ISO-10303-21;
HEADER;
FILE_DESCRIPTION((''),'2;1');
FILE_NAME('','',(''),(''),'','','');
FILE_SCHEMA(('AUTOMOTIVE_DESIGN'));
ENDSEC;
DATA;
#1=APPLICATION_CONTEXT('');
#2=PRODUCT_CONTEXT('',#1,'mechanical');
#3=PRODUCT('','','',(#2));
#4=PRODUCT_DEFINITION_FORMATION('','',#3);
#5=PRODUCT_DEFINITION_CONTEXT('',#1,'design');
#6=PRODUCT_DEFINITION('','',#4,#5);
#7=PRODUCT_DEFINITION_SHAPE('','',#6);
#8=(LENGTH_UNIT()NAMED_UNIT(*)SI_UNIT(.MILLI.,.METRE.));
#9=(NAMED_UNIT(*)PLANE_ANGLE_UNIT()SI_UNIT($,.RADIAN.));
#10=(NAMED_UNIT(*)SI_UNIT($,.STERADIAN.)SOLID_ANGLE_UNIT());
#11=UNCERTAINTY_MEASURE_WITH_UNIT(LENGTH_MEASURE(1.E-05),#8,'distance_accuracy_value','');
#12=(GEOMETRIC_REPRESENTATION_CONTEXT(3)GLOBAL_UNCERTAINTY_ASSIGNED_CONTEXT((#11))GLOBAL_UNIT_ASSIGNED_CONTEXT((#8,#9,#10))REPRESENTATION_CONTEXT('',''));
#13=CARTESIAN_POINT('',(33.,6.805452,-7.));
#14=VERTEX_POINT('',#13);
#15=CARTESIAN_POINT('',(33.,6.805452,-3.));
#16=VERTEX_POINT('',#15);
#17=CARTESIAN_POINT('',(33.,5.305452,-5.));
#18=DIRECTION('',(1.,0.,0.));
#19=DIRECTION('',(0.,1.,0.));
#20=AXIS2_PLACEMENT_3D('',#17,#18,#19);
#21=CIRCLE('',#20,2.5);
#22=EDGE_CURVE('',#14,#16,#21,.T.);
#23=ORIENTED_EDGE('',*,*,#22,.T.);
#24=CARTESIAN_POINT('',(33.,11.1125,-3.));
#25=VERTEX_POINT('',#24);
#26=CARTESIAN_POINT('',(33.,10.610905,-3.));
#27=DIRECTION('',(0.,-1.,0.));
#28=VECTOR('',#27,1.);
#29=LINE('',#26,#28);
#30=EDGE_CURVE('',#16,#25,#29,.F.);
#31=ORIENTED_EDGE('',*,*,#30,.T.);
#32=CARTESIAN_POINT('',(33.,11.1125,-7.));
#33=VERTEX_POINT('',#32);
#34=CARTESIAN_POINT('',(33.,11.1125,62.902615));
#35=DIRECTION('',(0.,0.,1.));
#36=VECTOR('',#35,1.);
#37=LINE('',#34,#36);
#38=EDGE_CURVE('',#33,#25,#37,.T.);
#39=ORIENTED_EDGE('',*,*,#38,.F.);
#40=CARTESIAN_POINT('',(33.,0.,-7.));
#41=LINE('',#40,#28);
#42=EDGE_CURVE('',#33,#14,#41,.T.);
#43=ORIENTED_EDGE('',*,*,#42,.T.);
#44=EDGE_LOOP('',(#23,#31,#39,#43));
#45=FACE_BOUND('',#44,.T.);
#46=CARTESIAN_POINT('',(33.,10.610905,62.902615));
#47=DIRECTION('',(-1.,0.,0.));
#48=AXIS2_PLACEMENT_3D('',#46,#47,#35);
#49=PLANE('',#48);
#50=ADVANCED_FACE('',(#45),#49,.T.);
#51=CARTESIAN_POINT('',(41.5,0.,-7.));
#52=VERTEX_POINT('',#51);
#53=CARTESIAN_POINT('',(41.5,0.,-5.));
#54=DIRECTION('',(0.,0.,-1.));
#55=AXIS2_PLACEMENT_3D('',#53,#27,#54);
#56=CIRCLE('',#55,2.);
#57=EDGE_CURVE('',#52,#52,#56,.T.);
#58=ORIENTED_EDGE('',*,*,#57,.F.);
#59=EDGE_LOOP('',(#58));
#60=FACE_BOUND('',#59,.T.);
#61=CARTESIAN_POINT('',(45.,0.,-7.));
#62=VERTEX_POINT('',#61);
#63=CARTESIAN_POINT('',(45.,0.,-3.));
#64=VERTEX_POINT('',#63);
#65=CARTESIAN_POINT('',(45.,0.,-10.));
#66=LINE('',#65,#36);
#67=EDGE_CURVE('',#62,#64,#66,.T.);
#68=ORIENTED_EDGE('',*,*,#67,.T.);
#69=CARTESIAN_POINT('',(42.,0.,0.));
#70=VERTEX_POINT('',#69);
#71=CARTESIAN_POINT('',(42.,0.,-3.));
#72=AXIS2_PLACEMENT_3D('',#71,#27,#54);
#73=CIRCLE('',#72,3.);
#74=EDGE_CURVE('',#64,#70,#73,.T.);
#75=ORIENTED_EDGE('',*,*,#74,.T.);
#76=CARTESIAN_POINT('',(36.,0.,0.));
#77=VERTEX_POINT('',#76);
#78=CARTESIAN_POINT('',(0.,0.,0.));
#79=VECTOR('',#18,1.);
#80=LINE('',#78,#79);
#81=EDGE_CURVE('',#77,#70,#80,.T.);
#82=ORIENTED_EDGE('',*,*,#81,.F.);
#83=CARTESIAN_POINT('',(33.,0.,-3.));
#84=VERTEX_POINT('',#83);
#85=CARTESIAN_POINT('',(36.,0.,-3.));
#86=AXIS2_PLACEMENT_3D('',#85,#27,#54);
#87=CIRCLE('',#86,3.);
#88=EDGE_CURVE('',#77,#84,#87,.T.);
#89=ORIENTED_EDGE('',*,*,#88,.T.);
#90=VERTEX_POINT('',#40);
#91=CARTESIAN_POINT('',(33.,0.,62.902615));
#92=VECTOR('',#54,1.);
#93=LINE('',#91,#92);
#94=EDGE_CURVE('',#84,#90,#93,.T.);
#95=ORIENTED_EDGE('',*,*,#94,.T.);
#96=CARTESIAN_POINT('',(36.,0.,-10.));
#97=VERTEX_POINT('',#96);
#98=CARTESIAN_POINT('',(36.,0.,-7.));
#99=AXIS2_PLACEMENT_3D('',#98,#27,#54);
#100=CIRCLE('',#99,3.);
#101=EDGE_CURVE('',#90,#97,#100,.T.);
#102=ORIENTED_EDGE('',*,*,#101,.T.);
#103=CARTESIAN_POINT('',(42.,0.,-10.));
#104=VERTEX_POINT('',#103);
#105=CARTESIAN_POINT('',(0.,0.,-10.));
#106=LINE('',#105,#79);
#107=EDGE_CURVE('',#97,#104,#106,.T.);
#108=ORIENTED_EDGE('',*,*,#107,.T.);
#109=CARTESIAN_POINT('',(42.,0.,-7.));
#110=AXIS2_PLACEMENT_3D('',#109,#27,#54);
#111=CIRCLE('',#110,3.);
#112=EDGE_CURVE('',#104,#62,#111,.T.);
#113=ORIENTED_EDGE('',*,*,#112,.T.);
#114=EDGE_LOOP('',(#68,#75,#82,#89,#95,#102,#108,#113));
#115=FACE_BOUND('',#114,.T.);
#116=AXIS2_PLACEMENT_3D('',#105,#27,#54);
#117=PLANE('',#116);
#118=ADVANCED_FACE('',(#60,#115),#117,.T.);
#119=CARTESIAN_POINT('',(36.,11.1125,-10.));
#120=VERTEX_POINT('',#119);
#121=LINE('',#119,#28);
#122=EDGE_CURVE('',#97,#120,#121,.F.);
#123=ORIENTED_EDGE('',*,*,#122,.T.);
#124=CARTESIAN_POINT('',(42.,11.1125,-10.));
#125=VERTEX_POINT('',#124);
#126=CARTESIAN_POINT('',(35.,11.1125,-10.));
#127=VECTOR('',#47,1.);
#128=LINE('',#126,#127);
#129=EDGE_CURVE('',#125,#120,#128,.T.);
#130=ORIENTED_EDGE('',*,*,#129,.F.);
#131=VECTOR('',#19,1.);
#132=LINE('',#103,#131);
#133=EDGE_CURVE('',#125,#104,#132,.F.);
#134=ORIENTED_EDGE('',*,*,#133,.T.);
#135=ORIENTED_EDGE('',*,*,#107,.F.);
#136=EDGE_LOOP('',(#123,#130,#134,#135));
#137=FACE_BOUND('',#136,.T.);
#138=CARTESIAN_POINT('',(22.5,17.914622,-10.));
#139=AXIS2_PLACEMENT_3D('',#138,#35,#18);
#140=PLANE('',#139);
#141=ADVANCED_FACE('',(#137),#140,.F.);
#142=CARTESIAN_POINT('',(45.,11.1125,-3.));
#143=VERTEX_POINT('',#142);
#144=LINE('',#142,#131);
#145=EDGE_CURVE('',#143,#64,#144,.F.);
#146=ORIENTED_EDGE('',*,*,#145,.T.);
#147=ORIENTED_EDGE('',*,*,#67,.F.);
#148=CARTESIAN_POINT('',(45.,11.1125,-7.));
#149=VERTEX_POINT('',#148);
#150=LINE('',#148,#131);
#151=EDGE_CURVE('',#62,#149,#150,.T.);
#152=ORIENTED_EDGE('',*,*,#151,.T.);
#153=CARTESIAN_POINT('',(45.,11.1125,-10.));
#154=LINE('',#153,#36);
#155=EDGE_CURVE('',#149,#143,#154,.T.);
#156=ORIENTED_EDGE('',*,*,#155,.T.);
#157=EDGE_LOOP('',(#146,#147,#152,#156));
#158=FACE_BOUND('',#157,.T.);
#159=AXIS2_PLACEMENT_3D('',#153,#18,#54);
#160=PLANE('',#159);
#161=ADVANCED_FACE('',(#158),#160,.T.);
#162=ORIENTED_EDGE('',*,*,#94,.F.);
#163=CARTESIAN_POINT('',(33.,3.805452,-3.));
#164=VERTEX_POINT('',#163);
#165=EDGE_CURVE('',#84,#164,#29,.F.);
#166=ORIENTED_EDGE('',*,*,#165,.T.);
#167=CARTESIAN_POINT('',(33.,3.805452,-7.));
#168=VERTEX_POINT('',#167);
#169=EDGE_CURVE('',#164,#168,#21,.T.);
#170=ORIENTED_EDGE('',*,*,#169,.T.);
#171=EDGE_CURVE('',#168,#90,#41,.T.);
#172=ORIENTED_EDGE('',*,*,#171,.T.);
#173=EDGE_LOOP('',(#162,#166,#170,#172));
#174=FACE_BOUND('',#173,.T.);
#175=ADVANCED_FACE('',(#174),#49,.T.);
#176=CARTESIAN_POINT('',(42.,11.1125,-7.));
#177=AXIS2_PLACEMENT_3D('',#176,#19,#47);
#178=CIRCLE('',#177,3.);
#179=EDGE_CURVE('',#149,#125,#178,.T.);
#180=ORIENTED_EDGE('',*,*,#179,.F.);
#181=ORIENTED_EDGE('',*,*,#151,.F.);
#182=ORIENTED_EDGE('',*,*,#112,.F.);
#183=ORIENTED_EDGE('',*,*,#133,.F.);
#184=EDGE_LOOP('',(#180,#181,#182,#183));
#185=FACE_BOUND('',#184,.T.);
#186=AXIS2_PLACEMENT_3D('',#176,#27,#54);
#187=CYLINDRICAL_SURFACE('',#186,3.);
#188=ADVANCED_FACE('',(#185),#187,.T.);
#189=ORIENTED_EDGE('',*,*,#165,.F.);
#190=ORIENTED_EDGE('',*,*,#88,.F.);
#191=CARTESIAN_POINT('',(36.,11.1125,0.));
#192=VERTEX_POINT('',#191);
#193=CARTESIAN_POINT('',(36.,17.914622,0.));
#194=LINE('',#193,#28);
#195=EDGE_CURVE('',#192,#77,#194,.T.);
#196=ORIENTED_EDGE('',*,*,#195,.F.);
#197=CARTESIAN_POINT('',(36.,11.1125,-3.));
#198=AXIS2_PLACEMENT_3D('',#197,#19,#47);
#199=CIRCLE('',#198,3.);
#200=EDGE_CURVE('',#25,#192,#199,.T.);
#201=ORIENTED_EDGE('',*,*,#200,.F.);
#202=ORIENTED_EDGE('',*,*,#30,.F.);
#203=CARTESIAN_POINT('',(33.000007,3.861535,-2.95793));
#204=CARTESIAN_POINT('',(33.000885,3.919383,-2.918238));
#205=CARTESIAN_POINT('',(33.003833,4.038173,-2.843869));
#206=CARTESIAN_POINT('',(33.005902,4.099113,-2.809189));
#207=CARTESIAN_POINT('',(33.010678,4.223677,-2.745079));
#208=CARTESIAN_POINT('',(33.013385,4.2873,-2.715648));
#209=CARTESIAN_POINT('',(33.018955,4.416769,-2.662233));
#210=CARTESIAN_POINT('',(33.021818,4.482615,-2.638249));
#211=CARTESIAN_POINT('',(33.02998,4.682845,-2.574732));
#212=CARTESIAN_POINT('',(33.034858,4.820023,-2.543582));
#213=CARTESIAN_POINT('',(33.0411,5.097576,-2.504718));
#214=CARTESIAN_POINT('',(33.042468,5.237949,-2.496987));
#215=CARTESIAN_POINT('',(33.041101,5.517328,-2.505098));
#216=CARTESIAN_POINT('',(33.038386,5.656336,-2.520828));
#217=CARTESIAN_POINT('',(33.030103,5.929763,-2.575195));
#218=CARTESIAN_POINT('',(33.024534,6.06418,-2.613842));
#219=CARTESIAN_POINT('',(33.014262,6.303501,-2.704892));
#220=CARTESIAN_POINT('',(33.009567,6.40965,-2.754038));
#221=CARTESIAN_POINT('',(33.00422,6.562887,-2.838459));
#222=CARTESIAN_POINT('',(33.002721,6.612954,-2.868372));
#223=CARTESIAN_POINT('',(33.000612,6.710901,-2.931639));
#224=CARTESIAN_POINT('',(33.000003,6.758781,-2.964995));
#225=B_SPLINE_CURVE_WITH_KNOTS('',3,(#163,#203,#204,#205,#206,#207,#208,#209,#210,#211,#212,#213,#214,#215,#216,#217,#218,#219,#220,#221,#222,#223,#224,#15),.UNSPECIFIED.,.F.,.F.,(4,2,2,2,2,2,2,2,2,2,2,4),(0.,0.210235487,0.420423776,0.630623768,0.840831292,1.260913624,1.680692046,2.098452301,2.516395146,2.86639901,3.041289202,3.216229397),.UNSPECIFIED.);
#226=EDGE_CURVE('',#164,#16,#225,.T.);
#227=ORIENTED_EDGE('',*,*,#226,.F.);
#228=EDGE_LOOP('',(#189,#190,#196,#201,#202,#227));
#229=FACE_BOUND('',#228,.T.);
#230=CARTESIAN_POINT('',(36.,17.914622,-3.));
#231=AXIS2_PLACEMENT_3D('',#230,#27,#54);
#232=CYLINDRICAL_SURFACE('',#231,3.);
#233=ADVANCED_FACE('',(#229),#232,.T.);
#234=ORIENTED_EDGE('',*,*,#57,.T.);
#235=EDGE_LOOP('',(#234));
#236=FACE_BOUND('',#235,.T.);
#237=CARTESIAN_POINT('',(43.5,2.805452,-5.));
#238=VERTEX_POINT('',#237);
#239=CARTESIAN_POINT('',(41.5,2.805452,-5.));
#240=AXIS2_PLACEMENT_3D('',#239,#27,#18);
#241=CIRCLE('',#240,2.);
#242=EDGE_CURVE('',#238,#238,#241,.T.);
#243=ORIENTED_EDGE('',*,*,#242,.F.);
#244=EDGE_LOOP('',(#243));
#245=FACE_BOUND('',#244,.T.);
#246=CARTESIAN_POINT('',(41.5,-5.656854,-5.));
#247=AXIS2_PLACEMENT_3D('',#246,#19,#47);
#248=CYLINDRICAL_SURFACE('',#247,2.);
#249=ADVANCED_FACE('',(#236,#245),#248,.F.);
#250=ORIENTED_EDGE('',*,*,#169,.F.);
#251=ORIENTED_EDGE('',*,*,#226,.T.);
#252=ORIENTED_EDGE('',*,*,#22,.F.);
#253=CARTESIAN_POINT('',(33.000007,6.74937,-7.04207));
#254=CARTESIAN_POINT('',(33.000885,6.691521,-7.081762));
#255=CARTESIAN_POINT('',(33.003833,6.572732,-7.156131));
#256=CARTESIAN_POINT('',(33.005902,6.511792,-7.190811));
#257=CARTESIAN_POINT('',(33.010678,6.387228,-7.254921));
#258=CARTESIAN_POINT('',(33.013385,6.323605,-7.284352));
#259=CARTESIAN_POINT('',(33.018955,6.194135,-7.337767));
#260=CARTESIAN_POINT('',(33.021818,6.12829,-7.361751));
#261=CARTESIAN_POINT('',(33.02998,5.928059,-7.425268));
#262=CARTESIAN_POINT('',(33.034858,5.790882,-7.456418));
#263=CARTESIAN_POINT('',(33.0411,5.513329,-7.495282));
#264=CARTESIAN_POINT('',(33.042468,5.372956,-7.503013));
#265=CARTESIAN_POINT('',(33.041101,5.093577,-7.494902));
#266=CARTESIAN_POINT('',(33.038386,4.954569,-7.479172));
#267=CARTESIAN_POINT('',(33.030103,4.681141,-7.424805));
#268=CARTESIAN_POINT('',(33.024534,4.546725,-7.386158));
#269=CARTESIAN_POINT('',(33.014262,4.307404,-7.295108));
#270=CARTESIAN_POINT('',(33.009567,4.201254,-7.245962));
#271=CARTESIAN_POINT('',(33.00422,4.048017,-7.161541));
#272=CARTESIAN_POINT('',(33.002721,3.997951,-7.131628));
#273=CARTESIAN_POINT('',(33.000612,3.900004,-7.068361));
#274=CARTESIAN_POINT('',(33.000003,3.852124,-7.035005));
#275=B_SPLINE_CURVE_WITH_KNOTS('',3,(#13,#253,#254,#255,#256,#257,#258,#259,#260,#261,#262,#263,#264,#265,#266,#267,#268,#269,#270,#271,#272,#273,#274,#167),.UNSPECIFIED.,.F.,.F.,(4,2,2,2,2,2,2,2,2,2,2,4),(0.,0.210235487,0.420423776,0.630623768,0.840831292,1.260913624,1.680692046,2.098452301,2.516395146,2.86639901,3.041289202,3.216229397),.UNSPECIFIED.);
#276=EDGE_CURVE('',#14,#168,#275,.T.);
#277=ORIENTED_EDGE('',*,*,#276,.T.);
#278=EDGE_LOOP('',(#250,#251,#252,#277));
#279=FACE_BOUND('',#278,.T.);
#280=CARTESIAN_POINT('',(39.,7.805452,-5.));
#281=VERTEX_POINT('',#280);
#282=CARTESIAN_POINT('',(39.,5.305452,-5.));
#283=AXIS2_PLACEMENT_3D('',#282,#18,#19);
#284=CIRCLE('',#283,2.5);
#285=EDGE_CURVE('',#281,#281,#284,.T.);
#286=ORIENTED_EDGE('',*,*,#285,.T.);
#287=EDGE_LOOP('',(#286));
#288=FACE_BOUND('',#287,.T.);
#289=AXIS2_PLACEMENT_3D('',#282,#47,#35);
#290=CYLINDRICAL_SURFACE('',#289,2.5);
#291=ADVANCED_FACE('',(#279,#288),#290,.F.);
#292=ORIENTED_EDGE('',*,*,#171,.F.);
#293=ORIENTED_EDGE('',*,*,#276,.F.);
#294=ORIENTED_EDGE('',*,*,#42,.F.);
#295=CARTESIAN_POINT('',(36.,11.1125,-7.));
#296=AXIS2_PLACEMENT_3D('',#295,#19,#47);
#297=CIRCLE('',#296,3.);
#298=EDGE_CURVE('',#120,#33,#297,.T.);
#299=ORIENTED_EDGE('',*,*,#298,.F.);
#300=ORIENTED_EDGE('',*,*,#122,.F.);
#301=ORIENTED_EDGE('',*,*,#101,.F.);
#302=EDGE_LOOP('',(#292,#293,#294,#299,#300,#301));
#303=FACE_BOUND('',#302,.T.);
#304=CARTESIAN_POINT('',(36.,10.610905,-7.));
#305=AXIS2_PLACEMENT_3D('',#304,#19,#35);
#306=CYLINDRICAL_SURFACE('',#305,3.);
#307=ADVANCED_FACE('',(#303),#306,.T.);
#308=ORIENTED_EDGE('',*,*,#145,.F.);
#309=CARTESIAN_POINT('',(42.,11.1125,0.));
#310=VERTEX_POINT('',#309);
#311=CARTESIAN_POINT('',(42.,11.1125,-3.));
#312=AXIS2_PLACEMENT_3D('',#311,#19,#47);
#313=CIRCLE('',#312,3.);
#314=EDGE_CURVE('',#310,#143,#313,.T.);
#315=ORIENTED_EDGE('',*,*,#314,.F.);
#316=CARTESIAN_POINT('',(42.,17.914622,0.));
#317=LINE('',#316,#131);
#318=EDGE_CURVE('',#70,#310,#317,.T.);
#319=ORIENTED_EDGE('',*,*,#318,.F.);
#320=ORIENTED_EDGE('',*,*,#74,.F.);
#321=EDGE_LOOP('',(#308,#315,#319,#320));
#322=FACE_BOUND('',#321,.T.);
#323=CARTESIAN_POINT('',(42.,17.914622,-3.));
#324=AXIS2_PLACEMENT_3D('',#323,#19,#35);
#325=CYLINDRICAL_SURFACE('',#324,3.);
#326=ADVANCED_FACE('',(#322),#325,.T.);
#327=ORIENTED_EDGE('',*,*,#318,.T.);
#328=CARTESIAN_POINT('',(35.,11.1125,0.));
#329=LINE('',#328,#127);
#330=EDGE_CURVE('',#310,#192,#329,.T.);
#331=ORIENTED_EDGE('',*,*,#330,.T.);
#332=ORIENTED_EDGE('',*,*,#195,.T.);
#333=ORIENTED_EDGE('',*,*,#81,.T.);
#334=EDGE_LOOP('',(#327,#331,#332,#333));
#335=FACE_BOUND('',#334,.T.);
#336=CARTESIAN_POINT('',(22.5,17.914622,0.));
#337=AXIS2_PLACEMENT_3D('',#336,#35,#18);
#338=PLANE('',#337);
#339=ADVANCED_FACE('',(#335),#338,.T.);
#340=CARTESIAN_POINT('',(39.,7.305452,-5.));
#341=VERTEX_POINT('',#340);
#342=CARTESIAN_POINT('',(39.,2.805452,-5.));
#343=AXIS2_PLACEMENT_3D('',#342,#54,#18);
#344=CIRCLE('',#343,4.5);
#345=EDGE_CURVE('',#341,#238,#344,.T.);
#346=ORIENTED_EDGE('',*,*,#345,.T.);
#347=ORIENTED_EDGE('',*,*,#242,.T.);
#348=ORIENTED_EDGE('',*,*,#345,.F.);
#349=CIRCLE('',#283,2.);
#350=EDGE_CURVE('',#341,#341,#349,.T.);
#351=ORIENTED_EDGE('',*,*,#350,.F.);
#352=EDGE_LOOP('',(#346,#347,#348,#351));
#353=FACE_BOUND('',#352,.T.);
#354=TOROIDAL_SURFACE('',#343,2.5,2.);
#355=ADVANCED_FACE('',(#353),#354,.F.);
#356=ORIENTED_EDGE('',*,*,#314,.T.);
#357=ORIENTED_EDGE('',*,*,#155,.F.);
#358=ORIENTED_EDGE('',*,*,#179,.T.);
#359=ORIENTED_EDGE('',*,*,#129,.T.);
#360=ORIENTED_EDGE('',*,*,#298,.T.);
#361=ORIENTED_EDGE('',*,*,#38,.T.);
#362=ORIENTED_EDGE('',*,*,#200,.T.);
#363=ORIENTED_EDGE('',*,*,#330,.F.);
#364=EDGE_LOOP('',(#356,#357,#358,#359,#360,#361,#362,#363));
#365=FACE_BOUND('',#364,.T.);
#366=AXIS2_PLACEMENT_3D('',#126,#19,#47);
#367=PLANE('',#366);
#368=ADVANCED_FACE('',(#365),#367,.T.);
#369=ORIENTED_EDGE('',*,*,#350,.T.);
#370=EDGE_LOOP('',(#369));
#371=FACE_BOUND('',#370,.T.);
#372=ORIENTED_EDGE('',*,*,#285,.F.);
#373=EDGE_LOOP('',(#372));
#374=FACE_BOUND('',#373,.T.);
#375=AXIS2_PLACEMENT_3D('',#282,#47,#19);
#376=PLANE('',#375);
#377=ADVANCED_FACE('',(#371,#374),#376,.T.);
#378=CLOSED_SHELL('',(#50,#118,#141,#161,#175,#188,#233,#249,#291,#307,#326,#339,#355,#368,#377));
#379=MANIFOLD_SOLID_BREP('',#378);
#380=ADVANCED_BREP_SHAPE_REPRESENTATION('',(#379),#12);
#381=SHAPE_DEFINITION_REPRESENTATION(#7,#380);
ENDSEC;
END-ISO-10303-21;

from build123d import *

# Parameters (mm, degrees)
BOSS_EXTRUDE1_DEPTH     = 10
CUT_EXTRUDE2_DEPTH      = 50.456381745
CUT_EXTRUDE2_DEPTH_BACK = 50.456381745
SKETCH3_R               = 2.5
CUT_EXTRUDE3_DEPTH      = 6
SKETCH4_R               = 2
CUT_REVOLVE1_ANGLE      = 90
SKETCH5_R               = 2
CUT_EXTRUDE4_DEPTH      = 2.805452299
FILLET1_R               = 5
SKETCH6_W               = 10
SKETCH6_H               = 29.685485307
CUT_EXTRUDE5_DEPTH      = 33
SKETCH7_W               = 19.76767366
SKETCH7_H               = 10
CUT_EXTRUDE6_DEPTH      = 48.418220859
FILLET2_R               = 3


with BuildPart() as part:
    # Sketch1 → Boss-Extrude1 (new body)
    with BuildSketch(Plane.XY):
        with BuildLine():
            Line((0, 0), (45, 0))
            Line((45, 0), (45, 11.1125))
            Line((45, 11.1125), (35, 11.1125))
            add(Edge.make_bspline(
                [(10, 11.1125), (14.576625097, 20.181995974), (30.423374903, 20.181995974), (35, 11.1125)],
                knots=[0, 0, 0, 0, 1, 1, 1, 1], degree=3))
            Line((10, 11.1125), (0, 11.1125))
            Line((0, 11.1125), (0, 0))
        make_face()
    extrude(amount=-BOSS_EXTRUDE1_DEPTH)

    # Sketch2 → Cut-Extrude2 (cut, two sides: drawn at the far end of the back side and taken through both)
    with BuildSketch(Plane.XY.offset(-CUT_EXTRUDE2_DEPTH_BACK)):
        with BuildLine():
            Line((33, 0), (33, 10.610904597))
            add(Edge.make_bspline(
                [(33, 10.610904597), (32.518518069, 11.455367364), (31.27134268, 12.982349636), (27.931157473, 15.20113612), (22.5, 16.390279221), (17.068842527, 15.20113612), (13.72865732, 12.982349636), (12.481481931, 11.455367364), (12, 10.610904597)],
                knots=[0.018308459, 0.018308459, 0.018308459, 0.018308459, 0.138731344, 0.25915423, 0.5, 0.74084577, 0.861268656, 0.981691541, 0.981691541, 0.981691541, 0.981691541], degree=3))
            Line((12, 10.610904597), (12, 0))
            Line((12, 0), (33, 0))
        make_face()
    extrude(amount=CUT_EXTRUDE2_DEPTH + CUT_EXTRUDE2_DEPTH_BACK, mode=Mode.SUBTRACT)

    # Sketch3 → Cut-Extrude3 (cut)
    with BuildSketch(Plane(origin=(12, 0, 0), x_dir=(0, 0, -1), z_dir=(1, 0, 0))):
        with Locations(Location((5, 5.305452299, 0), (0, 0, 90))):
            Circle(SKETCH3_R)
    cut_extrude3 = extrude(amount=-CUT_EXTRUDE3_DEPTH, mode=Mode.SUBTRACT)

    # Sketch4 → Cut-Revolve1 (revolve, cut)
    with BuildSketch(Plane(origin=(6, 0, 0), x_dir=(0, 0, -1), z_dir=(1, 0, 0))):
        with Locations((5, 5.305452299)):
            Circle(SKETCH4_R)
    cut_revolve1 = revolve(axis=Axis((6, 2.805452299, -5), (0, 0, 1)), revolution_arc=CUT_REVOLVE1_ANGLE, mode=Mode.SUBTRACT)

    # Sketch5 → Cut-Extrude4 (cut)
    with BuildSketch(Plane(origin=(0, 2.805452299, 0), x_dir=(1, 0, 0), z_dir=(0, 1, 0))):
        with Locations(Location((3.5, 5, 0), (0, 0, 180))):
            Circle(SKETCH5_R)
    cut_extrude4 = extrude(amount=-CUT_EXTRUDE4_DEPTH, mode=Mode.SUBTRACT)

    # Mirror1: Cut-Extrude3, Cut-Revolve1, Cut-Extrude4 across plane
    add(cut_extrude3.mirror(Plane(origin=(22.5, 0, 0), x_dir=(0, 0, 1), z_dir=(1, 0, 0))), mode=Mode.SUBTRACT)
    add(cut_revolve1.mirror(Plane(origin=(22.5, 0, 0), x_dir=(0, 0, 1), z_dir=(1, 0, 0))), mode=Mode.SUBTRACT)
    add(cut_extrude4.mirror(Plane(origin=(22.5, 0, 0), x_dir=(0, 0, 1), z_dir=(1, 0, 0))), mode=Mode.SUBTRACT)

    # Fillet1
    fillet1_edges = [part.edges().sort_by_distance(p)[0] for p in [
        (10, 11.1125, -5),
        (35, 11.1125, -5),
        (33, 10.610904597, -5),
        (12, 10.610904597, -5),
    ]]
    fillet(fillet1_edges, radius=FILLET1_R)

    # Sketch6 → Cut-Extrude5 (cut)
    with BuildSketch(Plane.ZY):
        with Locations((-5, 14.842742654)):
            Rectangle(SKETCH6_W, SKETCH6_H)
    extrude(amount=-CUT_EXTRUDE5_DEPTH, mode=Mode.SUBTRACT)

    # Sketch7 → Cut-Extrude6 (cut, through all)
    with BuildSketch(Plane(origin=(0, 11.1125, 0), x_dir=(1, 0, 0), z_dir=(0, 1, 0))):
        with Locations((35.11616317, 5)):
            Rectangle(SKETCH7_W, SKETCH7_H)
    extrude(amount=CUT_EXTRUDE6_DEPTH, mode=Mode.SUBTRACT)

    # Fillet2
    # the kernel refuses this fillet: 3 mm, written as the material it takes off along each edge
    with BuildSketch(Plane(origin=(45, -7.5, -10), x_dir=(0, 0, 1), z_dir=(0, 1, 0)), Plane(origin=(33, 18.6125, 0), x_dir=(1, 0, 0), z_dir=(0, -1, 0)), Plane(origin=(45, -7.5, 0), x_dir=(-1, 0, 0), z_dir=(0, 1, 0))) as fillet2_piece_1:
        with BuildLine():
            CenterArc((FILLET2_R, -FILLET2_R), FILLET2_R, 90, 90)
            Line((0, -FILLET2_R), (0, 0))
            Line((0, 0), (FILLET2_R, 0))
        make_face()
    extrude(amount=26.1125, mode=Mode.SUBTRACT)
    with BuildSketch(Plane(origin=(33, 18.6125, -10), x_dir=(1, 0, 0), z_dir=(0, -1, 0))) as fillet2_piece_2:
        with BuildLine():
            CenterArc((FILLET2_R, FILLET2_R), FILLET2_R, 180, 90)
            Line((0, FILLET2_R), (0, 0))
            Line((0, 0), (FILLET2_R, 0))
        make_face()
    extrude(amount=26.1125, mode=Mode.SUBTRACT)


solid = part.part
